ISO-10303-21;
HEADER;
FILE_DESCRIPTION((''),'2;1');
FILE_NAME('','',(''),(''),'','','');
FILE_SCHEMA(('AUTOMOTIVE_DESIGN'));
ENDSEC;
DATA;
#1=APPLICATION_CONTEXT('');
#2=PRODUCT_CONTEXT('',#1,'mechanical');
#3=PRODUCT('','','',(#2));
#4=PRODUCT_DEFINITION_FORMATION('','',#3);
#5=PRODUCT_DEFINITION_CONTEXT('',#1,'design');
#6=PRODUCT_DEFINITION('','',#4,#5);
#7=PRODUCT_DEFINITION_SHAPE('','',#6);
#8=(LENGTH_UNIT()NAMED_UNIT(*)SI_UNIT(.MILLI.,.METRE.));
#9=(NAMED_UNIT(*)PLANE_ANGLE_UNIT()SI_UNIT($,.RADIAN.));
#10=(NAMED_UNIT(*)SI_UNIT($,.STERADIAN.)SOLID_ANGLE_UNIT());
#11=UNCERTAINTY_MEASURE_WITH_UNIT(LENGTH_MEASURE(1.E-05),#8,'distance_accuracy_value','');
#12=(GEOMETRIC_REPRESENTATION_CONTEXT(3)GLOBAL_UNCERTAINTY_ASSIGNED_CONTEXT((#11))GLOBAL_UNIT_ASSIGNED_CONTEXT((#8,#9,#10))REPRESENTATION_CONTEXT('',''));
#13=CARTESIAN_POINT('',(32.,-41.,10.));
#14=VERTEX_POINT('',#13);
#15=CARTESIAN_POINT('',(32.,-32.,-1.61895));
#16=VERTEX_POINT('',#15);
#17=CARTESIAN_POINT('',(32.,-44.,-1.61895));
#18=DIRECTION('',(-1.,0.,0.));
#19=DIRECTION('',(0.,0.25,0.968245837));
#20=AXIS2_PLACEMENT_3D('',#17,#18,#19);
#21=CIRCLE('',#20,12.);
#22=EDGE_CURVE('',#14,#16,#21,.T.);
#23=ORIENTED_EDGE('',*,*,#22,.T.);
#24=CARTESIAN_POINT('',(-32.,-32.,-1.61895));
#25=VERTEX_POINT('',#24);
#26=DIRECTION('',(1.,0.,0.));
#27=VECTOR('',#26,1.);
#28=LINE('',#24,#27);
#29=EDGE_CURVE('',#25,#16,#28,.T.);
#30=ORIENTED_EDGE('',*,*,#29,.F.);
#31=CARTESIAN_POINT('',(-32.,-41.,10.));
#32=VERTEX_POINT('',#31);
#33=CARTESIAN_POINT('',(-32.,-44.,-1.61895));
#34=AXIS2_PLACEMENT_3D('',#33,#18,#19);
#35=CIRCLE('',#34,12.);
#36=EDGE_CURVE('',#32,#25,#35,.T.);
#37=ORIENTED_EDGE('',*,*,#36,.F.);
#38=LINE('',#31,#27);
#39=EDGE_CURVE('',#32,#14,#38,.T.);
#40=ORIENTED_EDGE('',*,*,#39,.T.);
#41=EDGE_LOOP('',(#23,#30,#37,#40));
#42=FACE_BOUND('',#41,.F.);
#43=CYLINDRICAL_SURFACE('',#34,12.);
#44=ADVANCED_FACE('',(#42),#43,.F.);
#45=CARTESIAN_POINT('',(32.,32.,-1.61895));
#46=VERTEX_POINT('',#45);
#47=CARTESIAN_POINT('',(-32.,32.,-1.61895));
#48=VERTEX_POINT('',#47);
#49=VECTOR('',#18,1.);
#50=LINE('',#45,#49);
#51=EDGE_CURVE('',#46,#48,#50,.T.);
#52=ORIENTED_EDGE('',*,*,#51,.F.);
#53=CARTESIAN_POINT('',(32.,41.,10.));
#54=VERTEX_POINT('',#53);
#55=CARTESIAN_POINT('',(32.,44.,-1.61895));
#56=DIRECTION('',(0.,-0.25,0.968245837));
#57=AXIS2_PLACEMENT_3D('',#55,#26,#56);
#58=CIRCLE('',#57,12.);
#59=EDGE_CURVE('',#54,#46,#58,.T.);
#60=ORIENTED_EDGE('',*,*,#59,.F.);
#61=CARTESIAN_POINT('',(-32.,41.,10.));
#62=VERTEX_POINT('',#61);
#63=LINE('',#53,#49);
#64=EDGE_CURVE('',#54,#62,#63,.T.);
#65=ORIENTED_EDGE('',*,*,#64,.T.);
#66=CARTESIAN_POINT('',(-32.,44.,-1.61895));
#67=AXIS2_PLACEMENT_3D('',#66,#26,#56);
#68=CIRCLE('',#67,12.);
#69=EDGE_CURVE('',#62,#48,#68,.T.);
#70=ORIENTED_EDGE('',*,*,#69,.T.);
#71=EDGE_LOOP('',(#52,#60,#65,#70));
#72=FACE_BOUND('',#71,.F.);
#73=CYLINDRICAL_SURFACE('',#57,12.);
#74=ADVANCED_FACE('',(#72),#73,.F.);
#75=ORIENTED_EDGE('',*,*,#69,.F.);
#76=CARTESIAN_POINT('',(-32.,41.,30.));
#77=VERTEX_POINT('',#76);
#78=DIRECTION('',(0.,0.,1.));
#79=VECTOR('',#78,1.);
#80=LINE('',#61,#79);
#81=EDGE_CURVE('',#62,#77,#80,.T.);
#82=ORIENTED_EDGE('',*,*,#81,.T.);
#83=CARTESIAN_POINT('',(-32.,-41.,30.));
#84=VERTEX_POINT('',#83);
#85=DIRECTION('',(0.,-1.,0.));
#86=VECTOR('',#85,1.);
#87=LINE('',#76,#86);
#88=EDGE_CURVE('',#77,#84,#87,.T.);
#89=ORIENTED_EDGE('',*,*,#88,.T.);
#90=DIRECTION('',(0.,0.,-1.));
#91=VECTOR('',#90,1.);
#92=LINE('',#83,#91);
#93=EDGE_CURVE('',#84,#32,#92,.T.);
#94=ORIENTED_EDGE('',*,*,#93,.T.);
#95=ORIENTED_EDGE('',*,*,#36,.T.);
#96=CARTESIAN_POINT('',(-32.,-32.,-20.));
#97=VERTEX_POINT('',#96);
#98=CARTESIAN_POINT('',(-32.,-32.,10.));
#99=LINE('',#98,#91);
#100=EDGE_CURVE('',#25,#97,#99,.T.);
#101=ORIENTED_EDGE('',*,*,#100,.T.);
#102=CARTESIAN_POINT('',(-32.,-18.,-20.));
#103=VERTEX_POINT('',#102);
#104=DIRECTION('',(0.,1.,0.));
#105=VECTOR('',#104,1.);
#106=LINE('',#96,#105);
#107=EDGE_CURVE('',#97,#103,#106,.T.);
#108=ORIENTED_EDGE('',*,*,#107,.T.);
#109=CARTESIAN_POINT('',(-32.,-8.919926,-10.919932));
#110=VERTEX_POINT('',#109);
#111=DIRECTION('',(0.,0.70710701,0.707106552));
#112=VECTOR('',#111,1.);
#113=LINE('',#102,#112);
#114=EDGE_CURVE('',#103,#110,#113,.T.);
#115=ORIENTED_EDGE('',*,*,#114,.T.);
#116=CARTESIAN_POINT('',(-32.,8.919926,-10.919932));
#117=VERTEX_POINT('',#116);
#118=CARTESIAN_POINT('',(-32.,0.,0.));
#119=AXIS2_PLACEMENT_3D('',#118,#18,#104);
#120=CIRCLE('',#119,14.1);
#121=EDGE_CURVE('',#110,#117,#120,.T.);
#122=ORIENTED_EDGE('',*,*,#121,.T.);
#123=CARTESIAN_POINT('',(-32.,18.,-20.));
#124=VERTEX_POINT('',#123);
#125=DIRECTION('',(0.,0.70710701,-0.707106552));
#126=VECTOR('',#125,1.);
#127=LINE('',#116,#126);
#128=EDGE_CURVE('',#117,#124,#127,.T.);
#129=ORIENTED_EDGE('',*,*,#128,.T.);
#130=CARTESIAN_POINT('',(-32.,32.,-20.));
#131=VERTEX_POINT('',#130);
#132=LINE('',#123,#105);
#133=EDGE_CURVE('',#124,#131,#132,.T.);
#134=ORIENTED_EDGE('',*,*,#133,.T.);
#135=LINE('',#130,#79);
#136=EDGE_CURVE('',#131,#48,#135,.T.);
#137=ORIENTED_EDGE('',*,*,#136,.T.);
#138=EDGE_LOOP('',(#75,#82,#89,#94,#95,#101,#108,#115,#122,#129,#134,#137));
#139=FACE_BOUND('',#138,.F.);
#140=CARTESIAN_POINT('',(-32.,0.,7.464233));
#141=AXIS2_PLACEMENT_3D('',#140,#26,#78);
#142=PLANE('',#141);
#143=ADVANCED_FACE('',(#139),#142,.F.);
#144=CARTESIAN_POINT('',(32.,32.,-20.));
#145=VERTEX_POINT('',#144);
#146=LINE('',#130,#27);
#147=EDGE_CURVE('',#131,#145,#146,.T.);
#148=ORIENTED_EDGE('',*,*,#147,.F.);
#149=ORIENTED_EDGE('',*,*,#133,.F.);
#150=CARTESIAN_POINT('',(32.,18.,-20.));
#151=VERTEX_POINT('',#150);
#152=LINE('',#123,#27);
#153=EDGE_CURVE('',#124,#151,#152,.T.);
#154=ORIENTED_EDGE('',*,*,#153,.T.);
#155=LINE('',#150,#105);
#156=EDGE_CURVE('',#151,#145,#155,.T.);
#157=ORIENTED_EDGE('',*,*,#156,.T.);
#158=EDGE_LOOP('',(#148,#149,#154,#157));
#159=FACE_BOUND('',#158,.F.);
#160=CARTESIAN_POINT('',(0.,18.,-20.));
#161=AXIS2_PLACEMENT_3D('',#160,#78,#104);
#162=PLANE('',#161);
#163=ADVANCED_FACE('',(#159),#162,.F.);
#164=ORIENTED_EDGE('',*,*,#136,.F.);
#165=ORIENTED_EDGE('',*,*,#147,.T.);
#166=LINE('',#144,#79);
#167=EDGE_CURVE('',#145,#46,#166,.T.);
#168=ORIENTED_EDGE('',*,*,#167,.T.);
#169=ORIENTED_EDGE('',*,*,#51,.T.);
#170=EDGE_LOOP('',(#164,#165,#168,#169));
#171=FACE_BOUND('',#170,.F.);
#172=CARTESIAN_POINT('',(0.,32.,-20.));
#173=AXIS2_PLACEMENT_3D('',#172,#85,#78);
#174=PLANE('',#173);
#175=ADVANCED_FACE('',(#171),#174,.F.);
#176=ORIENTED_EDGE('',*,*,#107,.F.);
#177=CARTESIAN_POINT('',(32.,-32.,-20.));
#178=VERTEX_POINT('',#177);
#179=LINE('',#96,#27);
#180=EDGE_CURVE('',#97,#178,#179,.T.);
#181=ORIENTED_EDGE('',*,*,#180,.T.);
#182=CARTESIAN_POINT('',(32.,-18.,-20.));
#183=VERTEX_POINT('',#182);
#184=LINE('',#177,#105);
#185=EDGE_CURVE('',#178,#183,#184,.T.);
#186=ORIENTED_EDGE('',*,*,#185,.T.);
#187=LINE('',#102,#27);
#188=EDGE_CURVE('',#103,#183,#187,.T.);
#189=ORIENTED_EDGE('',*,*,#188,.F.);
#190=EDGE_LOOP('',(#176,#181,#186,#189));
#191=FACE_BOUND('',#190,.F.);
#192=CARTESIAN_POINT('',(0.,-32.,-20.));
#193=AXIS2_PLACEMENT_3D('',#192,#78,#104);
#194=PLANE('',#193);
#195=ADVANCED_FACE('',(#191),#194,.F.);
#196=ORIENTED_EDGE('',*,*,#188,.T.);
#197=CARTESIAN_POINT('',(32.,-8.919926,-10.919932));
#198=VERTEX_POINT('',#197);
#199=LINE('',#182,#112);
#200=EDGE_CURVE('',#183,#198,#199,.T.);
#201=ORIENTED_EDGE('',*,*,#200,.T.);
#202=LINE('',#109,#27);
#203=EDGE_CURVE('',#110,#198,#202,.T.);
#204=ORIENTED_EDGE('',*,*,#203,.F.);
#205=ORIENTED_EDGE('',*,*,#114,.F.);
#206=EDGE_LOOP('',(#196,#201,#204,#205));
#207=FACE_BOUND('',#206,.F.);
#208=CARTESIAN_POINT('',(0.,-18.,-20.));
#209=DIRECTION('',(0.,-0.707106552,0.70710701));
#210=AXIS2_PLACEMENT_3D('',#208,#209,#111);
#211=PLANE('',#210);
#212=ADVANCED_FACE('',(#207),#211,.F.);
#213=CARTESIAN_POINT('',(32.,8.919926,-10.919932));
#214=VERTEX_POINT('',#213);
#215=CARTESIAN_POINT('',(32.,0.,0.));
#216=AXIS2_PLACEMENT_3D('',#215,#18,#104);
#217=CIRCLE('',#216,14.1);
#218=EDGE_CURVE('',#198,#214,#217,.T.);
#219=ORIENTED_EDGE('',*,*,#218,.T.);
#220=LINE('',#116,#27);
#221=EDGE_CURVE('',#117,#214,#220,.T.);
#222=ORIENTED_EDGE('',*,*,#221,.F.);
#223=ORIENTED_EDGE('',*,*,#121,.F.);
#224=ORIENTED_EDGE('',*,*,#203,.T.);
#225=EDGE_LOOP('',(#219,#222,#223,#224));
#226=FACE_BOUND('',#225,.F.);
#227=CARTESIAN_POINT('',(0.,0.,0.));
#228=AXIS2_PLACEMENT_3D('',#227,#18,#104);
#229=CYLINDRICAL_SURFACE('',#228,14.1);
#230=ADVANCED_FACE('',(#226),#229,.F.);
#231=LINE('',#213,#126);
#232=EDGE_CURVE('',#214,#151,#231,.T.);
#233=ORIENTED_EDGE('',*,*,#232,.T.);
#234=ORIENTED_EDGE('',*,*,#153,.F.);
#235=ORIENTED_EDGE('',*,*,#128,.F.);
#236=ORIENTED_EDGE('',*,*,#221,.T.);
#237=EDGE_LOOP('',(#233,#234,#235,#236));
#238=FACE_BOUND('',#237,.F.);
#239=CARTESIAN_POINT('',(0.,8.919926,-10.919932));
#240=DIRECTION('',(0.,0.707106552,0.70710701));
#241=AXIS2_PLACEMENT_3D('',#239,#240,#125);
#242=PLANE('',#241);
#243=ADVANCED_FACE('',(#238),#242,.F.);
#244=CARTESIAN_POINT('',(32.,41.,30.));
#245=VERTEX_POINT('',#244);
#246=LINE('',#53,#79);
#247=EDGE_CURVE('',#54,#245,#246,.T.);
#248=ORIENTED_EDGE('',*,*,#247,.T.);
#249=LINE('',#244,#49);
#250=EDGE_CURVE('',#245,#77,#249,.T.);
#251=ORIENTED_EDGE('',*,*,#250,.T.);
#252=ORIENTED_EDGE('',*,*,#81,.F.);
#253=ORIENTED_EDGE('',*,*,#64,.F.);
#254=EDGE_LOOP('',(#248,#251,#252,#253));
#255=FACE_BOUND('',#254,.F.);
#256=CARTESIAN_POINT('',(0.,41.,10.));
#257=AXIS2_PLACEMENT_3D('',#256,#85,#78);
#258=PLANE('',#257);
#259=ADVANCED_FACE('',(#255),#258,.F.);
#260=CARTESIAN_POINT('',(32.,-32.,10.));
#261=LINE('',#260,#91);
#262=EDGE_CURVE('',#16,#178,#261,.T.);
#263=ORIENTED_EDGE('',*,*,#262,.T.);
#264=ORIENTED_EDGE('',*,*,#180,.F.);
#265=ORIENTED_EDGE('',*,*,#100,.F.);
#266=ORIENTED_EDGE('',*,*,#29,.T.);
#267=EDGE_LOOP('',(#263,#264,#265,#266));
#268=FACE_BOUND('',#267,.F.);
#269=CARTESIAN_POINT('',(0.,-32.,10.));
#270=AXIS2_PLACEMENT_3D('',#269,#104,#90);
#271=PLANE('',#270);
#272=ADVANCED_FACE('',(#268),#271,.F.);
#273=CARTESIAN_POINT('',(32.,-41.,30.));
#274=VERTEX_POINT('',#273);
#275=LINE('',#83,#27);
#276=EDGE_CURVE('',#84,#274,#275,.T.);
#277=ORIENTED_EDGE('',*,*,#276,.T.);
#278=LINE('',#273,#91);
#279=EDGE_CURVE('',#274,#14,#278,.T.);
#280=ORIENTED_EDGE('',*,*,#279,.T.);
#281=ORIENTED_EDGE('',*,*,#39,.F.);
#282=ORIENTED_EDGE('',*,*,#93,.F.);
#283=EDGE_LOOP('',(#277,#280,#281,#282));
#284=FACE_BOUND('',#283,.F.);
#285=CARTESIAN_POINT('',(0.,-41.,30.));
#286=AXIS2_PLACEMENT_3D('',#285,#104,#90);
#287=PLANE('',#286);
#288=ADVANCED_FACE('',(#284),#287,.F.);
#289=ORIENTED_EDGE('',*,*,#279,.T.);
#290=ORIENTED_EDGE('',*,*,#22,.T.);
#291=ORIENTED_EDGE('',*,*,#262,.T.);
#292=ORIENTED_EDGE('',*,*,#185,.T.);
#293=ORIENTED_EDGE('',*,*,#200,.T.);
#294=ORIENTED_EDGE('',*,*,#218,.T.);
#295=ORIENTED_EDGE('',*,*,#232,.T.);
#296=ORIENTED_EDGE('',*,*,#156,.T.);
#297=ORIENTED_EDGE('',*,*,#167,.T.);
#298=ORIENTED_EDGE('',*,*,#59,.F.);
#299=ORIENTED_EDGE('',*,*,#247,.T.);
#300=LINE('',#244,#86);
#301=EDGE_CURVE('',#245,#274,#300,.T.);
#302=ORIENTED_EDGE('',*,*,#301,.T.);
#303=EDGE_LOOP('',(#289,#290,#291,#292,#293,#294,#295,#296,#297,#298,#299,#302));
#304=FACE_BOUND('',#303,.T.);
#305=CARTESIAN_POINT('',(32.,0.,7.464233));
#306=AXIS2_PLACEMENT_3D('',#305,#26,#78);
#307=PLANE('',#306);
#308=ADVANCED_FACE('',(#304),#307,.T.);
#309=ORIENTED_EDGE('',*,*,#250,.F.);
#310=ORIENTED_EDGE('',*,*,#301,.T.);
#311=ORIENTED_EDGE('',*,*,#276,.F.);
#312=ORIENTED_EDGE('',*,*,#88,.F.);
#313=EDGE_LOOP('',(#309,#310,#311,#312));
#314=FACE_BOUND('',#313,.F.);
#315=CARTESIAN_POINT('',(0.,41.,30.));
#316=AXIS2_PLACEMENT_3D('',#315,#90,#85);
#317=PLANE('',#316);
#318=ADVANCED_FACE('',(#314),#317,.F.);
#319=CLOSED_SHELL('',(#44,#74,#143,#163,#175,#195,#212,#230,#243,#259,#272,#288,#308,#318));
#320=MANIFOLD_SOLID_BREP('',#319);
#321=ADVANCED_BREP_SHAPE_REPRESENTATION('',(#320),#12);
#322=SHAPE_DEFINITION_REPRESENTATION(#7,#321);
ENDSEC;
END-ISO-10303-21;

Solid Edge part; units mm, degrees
sketch "Sketch1" plane through (0, 0, 0) normal (1, 0, 0) x (0, 1, 0)
  line L0 (41, 30) -> (-41, 30)
  line L1 (-41, 30) -> (-41, 10)
  line L2 (-41, 10) -> (-32, 10)
  line L3 (-32, 10) -> (-32, -20)
  line L4 (-32, -20) -> (-18, -20)
  line L5 (-18, -20) -> (-8.9199, -10.9199)
  arc A0 (-8.9199, -10.9199) -> (8.9199, -10.9199) centre (0, 0) cw
  line L6 (8.9199, -10.9199) -> (18, -20)
  line L7 (18, -20) -> (32, -20)
  line L8 (32, -20) -> (32, 10)
  line L9 (32, 10) -> (41, 10)
  line L10 (41, 10) -> (41, 30)
  dimension "D1" = 14.1
  dimension "D2" = 20
  dimension "D3" = 30
  dimension "D4" = 32
  dimension "D5" = 64
  dimension "D6" = 82
  dimension "D7" = 41
  dimension "D8" = 36
  dimension "D9" = 20
extrude "Protrusion1" add sketch "Sketch1" along normal mid plane 64
fillet "Round1" radius 12 2 edges at (0, -32, 10) (0, 32, 10)
